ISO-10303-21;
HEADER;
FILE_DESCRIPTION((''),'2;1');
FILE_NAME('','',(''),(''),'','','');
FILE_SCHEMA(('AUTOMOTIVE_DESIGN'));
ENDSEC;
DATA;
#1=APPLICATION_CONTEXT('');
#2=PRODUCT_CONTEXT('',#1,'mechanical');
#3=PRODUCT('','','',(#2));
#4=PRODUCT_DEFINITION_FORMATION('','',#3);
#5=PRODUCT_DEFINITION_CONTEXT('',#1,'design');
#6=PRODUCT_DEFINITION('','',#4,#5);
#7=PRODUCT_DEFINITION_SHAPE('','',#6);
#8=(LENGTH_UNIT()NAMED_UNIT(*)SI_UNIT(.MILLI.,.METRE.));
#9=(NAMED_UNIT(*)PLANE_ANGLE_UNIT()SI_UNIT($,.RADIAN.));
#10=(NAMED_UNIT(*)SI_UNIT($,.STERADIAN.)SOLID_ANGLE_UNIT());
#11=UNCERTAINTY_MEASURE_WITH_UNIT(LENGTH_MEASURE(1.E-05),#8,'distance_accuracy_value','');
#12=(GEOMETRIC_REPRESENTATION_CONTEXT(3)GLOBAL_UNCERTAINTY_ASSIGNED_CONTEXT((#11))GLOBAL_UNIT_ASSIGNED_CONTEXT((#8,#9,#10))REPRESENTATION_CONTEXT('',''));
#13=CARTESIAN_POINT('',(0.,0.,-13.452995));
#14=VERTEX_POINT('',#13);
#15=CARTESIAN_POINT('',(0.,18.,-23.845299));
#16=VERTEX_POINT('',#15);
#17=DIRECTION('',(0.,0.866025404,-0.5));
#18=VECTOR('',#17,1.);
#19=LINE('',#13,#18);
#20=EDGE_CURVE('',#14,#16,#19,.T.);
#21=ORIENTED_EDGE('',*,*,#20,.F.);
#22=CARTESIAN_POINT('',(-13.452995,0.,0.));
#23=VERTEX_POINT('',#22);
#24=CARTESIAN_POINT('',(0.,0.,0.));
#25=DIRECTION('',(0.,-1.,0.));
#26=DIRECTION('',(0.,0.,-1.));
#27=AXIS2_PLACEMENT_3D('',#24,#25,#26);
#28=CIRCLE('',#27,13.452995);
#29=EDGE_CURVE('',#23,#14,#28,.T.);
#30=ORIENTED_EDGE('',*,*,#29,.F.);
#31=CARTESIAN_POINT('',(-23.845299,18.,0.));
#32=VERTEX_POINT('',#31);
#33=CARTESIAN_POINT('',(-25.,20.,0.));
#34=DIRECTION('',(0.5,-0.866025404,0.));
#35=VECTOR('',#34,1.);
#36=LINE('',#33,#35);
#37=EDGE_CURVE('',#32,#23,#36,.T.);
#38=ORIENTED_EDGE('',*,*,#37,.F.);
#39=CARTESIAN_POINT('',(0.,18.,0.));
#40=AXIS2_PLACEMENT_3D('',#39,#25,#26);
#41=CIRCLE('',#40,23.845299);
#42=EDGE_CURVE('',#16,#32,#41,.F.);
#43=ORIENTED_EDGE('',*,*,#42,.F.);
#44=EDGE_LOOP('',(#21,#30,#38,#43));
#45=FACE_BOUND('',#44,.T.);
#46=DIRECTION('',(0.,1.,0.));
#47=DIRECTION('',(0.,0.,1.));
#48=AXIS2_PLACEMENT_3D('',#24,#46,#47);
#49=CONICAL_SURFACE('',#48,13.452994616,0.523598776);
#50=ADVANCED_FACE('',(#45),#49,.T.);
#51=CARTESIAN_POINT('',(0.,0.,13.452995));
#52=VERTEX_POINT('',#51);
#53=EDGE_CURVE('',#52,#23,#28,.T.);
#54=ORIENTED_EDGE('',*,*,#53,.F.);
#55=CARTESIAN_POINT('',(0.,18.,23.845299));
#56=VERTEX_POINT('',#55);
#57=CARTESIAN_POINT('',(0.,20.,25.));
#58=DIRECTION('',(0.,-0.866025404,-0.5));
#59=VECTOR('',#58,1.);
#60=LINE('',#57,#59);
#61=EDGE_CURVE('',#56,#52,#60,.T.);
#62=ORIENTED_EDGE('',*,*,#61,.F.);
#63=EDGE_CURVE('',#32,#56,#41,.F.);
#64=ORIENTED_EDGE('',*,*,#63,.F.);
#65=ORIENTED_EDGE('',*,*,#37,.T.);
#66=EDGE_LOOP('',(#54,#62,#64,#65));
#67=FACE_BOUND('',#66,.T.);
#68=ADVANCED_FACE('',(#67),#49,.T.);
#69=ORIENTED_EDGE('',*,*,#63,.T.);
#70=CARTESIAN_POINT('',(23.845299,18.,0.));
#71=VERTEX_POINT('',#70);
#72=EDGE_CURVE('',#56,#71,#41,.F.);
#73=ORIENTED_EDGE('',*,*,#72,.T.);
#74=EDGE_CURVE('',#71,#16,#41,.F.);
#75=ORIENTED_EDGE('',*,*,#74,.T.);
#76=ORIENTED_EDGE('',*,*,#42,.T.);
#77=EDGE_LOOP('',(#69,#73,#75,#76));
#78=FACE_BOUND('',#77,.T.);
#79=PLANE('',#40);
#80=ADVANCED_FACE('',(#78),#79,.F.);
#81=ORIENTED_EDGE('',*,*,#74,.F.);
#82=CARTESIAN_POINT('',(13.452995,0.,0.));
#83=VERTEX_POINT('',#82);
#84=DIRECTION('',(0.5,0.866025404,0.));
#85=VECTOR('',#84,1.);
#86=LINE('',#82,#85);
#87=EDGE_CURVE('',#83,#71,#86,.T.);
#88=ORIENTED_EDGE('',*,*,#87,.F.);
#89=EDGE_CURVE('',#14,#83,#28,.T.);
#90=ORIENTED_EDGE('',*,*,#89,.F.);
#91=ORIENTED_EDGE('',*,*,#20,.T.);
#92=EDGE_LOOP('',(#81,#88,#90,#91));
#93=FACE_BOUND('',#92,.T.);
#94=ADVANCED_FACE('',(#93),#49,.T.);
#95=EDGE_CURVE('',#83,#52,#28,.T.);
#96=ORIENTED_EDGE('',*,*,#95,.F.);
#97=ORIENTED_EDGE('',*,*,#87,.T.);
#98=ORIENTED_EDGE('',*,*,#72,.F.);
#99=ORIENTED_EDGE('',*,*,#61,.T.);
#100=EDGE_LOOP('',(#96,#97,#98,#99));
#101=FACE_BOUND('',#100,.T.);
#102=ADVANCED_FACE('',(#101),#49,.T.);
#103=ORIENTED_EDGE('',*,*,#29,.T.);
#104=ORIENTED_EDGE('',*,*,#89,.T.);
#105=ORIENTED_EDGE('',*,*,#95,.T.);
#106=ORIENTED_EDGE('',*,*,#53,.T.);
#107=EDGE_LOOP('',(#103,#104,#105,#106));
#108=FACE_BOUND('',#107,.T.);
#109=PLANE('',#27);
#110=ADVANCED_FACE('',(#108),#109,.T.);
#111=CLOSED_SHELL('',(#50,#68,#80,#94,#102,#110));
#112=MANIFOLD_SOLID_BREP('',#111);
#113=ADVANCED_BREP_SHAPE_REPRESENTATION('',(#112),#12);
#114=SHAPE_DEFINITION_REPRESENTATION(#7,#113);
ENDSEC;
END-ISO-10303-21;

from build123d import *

# Parameters (mm, degrees)
SKETCH1_W           = 50
SKETCH1_H           = 50
BOSS_EXTRUDE1_DEPTH = 18
FILLET1_R           = 25
CHAMFER1_SIZE       = 11.547005384
CHAMFER1_SIZE_2     = 20


# Some blends are built 0.0001 mm under size
with BuildPart() as part:
    # Sketch1 → Boss-Extrude1 (new body)
    with BuildSketch(Plane(origin=(0, 0, 0), x_dir=(1, 0, 0), z_dir=(0, 1, 0))):
        Rectangle(SKETCH1_W, SKETCH1_H)
    extrude(amount=BOSS_EXTRUDE1_DEPTH)

    # Fillet1
    fillet1_edges = [part.edges().sort_by_distance(p)[0] for p in [
        (-25, 9, -25),
        (25, 9, -25),
        (25, 9, 25),
        (-25, 9, 25),
    ]]
    fillet(fillet1_edges, radius=FILLET1_R - 0.0001)  # a hair under: the kernel refuses the full size

    # Chamfer1
    # the kernel refuses this chamfer: 20, 11.547005384 mm, written as the material it takes off along each edge
    with BuildSketch(Plane(origin=(0.0001, 0, 0.0001), x_dir=(0, 0, 1), z_dir=(-1, 0, 0))) as chamfer1_piece_1:
        Polygon((24.9999 - CHAMFER1_SIZE, 0), (24.9999, CHAMFER1_SIZE_2), (24.9999, 0), align=None)
    revolve(axis=Axis((0.0001, 0, 0.0001), (0, 1, 0)), revolution_arc=90, mode=Mode.SUBTRACT)
    with BuildSketch(Plane(origin=(0.0001, 0, -0.0001), x_dir=(1, 0, 0), z_dir=(0, 0, 1))) as chamfer1_piece_2:
        Polygon((24.9999 - CHAMFER1_SIZE, 0), (24.9999, CHAMFER1_SIZE_2), (24.9999, 0), align=None)
    revolve(axis=Axis((0.0001, 0, -0.0001), (0, 1, 0)), revolution_arc=90, mode=Mode.SUBTRACT)
    with BuildSketch(Plane(origin=(-0.0001, 0, -0.0001), x_dir=(0, 0, -1), z_dir=(1, 0, 0))) as chamfer1_piece_3:
        Polygon((24.9999 - CHAMFER1_SIZE, 0), (24.9999, CHAMFER1_SIZE_2), (24.9999, 0), align=None)
    revolve(axis=Axis((-0.0001, 0, -0.0001), (0, 1, 0)), revolution_arc=90, mode=Mode.SUBTRACT)
    with BuildSketch(Plane(origin=(-0.0001, 0, 0.0001), x_dir=(0, 0, 1), z_dir=(1, 0, 0))) as chamfer1_piece_4:
        Polygon((24.9999 - CHAMFER1_SIZE, 0), (24.9999, -CHAMFER1_SIZE_2), (24.9999, 0), align=None)
    revolve(axis=Axis((-0.0001, 0, 0.0001), (0, -1, 0)), revolution_arc=90, mode=Mode.SUBTRACT)
    with BuildSketch(Plane(origin=(-0.0001, 0, 25), x_dir=(0, 0.9998132206222079, 0.019326765612700806), z_dir=(1, 0, 0))) as chamfer1_piece_5:
        Polygon((CHAMFER1_SIZE_2 * 0.999813220622, -CHAMFER1_SIZE_2 * 0.0193267656127), (-CHAMFER1_SIZE * 0.0193267656124, -CHAMFER1_SIZE * 0.999813220604), (0, 0), align=None)
    extrude(amount=0.0002, mode=Mode.SUBTRACT)
    with BuildSketch(Plane(origin=(-25, 0, -0.0001), x_dir=(0.9983227437537926, -0.05789386240267081, 0), z_dir=(0, 0, 1)), Plane(origin=(0.0001, 0, -25), x_dir=(0, -0.05789386240267081, 0.9983227437537926), z_dir=(-1, 0, 0)), Plane(origin=(25, 0, 0.0001), x_dir=(-0.9983227437537926, -0.05789386240267081, 0), z_dir=(0, 0, -1))) as chamfer1_piece_6:
        Polygon((CHAMFER1_SIZE * 0.998322743736, CHAMFER1_SIZE * 0.0578938624016), (-CHAMFER1_SIZE_2 * 0.0578938624027, CHAMFER1_SIZE_2 * 0.998322743754), (0, 0), align=None)
    extrude(amount=0.0002, mode=Mode.SUBTRACT)


solid = part.part
